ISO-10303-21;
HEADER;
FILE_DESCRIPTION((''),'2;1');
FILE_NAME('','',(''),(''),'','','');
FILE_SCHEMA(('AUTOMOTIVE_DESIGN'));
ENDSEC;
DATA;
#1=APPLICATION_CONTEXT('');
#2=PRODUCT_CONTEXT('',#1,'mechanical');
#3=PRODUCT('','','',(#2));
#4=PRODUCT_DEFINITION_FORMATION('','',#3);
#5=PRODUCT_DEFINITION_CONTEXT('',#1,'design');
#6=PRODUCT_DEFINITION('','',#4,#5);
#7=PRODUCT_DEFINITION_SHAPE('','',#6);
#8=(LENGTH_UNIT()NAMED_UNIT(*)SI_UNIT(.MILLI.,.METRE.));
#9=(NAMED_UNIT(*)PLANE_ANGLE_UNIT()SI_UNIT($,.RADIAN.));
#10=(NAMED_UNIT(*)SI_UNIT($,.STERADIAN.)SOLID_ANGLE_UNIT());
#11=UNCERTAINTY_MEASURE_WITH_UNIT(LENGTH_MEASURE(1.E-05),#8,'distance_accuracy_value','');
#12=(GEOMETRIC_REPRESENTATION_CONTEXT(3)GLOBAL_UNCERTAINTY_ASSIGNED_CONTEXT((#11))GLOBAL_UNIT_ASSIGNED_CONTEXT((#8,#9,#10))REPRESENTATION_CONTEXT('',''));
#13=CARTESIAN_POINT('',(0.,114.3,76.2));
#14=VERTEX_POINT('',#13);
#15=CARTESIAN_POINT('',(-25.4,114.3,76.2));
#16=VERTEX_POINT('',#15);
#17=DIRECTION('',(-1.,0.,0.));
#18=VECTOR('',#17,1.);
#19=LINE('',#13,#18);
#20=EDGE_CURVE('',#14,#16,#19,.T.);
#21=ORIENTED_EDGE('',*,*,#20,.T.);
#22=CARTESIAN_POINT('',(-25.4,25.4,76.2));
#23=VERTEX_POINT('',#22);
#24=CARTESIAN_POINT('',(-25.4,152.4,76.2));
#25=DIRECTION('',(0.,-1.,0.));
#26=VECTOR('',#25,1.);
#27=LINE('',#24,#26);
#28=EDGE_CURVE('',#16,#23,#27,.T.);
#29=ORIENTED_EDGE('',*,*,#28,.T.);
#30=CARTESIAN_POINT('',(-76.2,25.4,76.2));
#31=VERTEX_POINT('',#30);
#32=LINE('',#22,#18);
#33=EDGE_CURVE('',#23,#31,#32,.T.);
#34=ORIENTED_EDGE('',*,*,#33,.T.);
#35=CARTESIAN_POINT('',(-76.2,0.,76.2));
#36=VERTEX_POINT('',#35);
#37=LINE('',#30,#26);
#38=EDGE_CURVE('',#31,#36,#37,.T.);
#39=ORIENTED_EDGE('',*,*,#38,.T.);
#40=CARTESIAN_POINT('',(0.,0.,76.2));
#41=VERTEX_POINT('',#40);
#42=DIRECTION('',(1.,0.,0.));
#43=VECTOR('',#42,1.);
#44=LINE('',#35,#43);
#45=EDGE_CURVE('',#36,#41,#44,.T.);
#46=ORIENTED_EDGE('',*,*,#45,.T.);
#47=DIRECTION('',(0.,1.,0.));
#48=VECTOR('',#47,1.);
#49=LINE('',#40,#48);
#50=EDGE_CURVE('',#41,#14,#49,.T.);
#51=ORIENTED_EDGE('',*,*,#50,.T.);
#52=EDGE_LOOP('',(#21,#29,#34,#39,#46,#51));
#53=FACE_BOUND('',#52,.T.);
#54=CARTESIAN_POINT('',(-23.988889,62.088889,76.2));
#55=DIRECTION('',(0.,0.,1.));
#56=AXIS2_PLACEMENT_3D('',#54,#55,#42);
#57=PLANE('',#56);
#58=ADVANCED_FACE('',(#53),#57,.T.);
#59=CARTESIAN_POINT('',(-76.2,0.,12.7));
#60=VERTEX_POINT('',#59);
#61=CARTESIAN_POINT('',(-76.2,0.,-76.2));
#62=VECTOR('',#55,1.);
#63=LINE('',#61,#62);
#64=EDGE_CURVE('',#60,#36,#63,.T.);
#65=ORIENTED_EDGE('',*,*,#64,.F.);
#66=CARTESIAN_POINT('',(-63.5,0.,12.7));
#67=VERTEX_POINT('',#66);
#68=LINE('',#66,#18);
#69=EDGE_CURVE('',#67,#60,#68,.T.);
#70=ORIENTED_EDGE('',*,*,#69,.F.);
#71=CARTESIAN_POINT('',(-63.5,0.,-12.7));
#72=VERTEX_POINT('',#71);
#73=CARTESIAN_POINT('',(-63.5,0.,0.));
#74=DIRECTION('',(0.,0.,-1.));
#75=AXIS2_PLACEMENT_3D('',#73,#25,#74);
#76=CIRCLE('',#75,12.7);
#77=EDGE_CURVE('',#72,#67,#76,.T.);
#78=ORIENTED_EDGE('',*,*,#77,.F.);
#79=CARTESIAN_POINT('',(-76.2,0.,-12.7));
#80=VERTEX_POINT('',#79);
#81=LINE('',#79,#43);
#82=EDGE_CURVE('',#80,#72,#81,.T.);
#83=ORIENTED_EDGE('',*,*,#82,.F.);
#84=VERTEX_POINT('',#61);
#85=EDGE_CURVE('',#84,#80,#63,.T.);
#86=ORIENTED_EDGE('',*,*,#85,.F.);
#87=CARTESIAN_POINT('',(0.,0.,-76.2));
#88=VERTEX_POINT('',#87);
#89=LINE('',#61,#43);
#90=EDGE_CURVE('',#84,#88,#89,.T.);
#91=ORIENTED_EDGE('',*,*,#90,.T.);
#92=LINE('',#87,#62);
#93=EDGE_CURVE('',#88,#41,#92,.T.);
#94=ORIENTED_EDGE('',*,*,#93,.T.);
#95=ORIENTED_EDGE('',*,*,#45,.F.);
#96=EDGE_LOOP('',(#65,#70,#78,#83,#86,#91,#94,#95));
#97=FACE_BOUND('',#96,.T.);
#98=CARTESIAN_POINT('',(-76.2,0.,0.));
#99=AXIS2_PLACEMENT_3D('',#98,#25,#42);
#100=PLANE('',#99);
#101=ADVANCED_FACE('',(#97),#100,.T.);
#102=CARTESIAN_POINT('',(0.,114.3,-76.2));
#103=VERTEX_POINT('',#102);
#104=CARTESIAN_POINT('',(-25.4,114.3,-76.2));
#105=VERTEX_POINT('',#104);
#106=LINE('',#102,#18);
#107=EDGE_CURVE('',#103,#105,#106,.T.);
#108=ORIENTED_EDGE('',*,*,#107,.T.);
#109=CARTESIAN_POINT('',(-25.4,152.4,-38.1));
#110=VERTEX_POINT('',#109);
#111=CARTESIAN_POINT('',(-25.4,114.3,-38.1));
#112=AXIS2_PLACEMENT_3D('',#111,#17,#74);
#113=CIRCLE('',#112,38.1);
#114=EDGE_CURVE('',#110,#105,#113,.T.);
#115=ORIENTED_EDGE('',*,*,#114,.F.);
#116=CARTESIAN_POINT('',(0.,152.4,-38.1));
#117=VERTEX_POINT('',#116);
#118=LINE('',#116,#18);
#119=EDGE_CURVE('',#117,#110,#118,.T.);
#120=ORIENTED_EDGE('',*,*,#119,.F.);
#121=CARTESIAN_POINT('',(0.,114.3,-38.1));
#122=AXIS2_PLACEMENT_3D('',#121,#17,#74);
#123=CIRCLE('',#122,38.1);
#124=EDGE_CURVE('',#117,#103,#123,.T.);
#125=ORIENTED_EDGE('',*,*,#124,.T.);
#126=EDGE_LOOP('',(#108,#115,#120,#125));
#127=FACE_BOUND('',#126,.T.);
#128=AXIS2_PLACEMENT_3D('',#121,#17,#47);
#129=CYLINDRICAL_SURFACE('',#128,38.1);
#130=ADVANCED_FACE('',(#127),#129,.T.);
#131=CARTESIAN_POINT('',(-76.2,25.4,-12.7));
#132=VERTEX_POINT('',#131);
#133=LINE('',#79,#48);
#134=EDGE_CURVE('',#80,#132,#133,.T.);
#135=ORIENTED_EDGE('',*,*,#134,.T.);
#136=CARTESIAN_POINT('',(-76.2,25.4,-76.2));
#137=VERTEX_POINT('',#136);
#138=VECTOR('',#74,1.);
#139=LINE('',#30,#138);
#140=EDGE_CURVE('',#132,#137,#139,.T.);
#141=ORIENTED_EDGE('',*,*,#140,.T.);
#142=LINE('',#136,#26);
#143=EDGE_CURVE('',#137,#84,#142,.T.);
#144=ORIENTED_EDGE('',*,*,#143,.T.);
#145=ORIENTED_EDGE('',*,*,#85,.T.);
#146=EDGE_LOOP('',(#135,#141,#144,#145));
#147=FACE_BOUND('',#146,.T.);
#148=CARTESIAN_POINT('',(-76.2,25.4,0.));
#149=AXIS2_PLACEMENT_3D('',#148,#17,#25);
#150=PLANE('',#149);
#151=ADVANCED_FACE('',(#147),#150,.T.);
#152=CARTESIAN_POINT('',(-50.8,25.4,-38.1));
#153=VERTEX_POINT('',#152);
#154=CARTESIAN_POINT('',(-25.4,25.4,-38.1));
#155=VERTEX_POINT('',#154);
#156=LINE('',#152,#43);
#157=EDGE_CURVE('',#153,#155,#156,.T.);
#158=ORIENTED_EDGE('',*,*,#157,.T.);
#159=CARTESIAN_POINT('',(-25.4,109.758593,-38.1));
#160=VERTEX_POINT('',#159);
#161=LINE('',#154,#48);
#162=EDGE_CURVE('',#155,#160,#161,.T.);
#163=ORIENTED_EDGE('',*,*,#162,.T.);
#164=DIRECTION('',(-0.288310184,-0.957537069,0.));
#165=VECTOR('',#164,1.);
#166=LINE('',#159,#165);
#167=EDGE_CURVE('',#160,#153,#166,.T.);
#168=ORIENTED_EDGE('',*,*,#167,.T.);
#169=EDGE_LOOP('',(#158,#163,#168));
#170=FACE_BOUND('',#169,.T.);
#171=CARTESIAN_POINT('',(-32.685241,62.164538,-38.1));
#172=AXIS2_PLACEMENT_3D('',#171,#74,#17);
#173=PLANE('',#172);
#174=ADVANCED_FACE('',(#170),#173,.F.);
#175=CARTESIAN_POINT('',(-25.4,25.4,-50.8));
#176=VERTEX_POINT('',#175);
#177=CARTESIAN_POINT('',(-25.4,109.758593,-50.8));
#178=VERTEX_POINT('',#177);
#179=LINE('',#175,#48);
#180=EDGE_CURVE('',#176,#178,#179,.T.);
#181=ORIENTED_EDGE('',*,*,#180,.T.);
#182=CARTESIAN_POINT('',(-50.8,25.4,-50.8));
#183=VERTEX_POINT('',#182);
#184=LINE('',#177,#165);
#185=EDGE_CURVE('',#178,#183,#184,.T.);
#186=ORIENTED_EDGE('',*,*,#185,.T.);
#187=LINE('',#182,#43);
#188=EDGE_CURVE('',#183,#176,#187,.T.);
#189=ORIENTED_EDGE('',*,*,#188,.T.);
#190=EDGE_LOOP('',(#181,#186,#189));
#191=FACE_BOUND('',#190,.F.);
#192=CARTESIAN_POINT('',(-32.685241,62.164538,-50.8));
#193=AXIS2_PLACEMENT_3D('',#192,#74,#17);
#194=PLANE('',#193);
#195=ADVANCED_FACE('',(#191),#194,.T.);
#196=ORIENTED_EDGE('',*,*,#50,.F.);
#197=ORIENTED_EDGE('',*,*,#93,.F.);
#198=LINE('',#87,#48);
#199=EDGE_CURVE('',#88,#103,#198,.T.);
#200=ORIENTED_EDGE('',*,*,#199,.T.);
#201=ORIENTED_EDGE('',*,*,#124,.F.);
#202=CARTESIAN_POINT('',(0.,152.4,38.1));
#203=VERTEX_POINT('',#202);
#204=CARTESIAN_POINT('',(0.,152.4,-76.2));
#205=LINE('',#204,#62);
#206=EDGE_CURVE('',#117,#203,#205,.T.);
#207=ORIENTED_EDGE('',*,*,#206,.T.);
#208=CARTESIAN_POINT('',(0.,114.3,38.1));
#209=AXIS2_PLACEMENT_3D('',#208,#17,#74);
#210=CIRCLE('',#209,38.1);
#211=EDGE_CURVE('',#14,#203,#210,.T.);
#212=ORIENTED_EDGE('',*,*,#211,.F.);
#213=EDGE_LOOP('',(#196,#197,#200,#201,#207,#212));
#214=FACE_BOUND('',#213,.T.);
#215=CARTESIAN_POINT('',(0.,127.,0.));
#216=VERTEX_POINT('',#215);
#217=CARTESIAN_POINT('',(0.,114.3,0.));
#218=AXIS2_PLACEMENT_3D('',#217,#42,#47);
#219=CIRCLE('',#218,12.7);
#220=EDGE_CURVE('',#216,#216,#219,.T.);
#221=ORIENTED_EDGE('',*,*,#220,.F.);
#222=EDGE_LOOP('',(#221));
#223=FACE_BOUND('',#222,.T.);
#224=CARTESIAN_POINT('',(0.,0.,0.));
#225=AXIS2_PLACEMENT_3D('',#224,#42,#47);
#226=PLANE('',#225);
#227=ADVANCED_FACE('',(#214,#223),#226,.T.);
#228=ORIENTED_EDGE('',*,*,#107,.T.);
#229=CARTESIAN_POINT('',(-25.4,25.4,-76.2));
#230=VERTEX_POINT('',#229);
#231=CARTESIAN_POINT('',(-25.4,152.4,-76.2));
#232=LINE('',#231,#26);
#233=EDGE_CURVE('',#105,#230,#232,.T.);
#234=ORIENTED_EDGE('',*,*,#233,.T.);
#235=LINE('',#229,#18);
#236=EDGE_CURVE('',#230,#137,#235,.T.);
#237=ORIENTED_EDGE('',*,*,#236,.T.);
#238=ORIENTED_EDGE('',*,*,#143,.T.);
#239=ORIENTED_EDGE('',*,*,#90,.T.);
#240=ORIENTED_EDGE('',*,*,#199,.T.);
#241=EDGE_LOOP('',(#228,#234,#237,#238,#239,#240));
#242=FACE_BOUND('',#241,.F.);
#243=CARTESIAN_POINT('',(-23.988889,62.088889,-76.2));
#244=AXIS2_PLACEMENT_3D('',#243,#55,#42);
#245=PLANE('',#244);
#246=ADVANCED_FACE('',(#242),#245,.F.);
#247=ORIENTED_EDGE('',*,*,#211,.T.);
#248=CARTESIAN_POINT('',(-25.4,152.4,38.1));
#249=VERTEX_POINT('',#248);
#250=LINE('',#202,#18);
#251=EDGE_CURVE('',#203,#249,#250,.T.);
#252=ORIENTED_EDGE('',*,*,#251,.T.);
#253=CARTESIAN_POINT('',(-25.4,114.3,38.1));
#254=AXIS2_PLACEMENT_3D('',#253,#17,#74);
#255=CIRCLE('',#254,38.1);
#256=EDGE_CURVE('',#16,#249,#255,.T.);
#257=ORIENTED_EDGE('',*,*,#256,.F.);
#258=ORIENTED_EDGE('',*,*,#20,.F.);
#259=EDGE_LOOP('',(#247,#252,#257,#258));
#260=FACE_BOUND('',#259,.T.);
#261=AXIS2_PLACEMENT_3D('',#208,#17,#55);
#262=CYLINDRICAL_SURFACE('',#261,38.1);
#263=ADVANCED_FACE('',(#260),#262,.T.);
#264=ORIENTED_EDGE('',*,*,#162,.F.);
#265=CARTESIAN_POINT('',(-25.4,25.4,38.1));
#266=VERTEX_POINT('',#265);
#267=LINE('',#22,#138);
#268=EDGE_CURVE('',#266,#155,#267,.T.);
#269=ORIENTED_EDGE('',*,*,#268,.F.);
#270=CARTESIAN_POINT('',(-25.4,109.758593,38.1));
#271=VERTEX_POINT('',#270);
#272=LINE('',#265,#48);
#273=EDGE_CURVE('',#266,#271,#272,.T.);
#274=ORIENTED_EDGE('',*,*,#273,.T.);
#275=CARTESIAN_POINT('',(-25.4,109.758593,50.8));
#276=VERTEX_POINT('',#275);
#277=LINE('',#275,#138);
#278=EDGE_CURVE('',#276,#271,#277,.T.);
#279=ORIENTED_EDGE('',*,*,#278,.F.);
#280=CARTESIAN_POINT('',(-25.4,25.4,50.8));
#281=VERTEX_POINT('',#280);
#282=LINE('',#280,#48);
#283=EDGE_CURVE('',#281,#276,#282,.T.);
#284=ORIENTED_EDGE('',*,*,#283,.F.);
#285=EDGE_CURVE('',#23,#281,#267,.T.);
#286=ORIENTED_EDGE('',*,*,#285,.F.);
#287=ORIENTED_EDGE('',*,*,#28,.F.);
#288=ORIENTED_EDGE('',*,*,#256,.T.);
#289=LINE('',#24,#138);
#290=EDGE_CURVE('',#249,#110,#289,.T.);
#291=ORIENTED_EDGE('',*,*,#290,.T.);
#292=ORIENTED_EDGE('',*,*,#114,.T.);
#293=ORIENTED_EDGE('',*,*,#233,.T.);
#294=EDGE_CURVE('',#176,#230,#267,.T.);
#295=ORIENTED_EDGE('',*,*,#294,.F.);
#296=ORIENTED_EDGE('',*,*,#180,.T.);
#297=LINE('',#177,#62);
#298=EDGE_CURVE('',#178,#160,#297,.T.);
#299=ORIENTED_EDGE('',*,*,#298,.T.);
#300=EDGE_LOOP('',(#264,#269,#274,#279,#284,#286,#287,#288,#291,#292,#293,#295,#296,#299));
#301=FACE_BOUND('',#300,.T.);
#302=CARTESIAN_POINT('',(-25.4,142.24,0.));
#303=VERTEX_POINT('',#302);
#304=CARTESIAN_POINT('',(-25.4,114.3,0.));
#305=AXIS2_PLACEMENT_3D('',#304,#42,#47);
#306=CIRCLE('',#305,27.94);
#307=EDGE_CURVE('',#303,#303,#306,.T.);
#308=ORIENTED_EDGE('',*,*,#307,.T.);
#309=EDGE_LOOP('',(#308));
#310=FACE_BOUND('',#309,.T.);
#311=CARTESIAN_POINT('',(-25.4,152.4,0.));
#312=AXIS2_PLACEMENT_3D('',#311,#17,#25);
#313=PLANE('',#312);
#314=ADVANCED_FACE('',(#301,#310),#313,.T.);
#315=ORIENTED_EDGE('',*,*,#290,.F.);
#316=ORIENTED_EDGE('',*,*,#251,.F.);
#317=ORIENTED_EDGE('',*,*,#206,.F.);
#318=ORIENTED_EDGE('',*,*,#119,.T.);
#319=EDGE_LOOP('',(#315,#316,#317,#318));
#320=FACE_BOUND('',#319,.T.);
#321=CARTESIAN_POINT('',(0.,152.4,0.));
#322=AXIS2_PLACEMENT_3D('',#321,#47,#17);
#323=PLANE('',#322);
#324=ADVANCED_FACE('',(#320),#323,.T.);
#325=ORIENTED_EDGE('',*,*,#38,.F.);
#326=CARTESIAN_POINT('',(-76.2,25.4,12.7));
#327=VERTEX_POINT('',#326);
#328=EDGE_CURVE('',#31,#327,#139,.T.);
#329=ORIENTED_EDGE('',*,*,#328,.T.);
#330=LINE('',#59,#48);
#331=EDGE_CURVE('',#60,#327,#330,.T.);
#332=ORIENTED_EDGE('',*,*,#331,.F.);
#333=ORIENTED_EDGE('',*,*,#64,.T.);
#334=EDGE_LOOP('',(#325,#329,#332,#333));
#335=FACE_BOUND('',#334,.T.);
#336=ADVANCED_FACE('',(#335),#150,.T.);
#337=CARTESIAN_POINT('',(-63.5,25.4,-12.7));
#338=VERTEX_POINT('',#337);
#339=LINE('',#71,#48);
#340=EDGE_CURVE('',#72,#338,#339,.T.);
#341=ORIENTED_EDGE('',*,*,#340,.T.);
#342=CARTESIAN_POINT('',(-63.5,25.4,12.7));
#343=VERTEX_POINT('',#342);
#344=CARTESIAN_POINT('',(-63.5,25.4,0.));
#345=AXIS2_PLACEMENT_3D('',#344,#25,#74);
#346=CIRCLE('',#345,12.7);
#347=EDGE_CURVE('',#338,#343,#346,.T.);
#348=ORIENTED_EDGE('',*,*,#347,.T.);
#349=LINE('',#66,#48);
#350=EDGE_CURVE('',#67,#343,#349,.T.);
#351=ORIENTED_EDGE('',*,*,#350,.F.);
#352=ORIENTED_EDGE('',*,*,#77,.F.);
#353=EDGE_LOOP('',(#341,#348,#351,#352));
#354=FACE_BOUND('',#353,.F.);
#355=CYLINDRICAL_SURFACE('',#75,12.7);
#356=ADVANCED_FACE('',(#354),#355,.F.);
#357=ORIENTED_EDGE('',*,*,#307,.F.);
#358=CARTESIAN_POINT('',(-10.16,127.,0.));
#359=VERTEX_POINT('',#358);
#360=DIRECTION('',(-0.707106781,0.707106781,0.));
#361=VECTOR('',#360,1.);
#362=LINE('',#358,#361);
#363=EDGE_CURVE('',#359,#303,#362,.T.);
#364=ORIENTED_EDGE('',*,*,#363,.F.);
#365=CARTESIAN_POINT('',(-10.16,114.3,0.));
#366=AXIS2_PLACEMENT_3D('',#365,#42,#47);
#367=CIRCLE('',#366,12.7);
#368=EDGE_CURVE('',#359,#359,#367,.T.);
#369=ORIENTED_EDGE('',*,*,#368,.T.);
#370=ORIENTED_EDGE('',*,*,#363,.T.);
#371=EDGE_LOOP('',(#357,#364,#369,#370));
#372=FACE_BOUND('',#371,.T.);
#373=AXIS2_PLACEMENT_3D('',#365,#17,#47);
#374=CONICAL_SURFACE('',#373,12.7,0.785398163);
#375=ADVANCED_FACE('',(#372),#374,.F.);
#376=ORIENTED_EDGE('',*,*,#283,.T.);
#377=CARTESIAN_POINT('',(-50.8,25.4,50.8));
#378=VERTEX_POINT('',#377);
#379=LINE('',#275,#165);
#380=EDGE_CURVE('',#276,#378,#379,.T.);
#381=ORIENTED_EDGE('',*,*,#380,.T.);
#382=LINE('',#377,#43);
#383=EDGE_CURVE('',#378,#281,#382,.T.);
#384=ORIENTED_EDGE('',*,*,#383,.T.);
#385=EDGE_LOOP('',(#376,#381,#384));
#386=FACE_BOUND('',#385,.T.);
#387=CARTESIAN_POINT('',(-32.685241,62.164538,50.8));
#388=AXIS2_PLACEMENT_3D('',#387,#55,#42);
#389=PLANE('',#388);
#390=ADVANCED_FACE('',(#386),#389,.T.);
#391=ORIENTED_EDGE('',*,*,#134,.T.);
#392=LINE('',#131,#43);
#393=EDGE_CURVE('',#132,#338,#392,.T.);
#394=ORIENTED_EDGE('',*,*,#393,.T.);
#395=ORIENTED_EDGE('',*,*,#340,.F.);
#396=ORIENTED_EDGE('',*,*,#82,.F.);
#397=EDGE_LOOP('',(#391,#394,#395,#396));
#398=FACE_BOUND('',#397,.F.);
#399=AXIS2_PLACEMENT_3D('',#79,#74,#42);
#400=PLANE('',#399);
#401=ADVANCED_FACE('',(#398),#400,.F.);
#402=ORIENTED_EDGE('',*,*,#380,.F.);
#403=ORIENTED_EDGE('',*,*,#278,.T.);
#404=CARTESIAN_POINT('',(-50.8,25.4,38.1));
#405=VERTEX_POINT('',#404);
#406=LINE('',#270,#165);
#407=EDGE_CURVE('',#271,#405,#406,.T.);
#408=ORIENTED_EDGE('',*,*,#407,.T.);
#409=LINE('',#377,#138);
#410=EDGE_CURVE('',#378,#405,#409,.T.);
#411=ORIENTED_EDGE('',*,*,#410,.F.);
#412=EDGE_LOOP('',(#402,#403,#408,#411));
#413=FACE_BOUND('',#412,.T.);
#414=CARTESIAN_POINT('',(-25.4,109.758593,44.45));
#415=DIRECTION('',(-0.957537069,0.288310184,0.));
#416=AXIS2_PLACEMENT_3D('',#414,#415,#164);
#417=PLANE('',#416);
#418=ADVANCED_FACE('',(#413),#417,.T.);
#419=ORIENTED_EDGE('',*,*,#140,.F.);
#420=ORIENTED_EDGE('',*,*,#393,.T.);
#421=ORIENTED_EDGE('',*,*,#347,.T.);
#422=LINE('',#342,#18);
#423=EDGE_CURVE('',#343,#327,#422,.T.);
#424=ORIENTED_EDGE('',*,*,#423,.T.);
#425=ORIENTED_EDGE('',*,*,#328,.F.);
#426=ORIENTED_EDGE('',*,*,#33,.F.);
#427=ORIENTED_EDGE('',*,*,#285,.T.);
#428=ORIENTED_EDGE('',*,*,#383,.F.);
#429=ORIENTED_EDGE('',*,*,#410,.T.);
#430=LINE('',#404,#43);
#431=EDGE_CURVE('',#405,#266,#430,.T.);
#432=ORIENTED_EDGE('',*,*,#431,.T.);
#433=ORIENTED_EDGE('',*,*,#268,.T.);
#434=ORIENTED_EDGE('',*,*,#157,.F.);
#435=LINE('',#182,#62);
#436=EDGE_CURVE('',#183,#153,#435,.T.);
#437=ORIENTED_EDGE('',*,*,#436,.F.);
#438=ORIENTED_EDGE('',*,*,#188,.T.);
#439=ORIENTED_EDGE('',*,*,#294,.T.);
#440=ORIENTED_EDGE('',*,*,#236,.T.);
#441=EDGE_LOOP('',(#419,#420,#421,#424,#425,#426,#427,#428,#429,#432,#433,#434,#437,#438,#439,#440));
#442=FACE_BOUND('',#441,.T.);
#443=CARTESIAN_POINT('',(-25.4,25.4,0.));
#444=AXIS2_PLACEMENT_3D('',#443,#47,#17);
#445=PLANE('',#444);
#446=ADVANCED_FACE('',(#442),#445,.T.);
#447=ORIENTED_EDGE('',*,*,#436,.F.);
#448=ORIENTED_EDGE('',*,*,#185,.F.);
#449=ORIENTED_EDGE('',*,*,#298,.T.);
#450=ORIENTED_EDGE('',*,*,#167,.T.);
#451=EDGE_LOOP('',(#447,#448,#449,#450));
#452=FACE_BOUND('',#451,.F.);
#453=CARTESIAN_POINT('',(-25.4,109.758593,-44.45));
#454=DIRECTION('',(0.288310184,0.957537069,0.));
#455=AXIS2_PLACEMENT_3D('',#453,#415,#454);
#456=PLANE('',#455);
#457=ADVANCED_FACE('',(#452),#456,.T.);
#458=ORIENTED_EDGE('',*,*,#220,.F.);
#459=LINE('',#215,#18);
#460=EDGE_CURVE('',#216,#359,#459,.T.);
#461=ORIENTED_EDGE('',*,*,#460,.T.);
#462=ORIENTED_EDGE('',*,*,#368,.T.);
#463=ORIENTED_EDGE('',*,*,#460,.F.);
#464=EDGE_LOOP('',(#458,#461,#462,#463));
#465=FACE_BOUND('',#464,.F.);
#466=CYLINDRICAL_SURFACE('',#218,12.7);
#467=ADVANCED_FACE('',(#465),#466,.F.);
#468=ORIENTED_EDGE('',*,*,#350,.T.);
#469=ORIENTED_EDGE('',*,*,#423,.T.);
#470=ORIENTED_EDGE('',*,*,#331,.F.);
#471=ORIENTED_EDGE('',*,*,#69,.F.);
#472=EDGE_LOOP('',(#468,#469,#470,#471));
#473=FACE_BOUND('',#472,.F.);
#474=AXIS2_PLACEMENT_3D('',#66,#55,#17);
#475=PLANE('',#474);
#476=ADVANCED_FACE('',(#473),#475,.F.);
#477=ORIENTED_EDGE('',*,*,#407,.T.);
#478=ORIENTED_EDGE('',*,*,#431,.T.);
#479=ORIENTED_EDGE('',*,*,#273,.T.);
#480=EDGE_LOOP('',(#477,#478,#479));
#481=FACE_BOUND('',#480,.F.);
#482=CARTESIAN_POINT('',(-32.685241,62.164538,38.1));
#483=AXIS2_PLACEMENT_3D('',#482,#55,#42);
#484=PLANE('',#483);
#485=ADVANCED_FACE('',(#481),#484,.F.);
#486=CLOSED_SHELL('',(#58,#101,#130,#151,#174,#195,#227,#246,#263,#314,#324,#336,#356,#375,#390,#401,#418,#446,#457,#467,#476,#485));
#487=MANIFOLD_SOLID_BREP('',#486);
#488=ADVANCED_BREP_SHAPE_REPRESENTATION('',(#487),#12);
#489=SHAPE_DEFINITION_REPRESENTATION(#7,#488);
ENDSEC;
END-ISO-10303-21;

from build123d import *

# Parameters (mm, degrees)
F1_DEPTH = 76.2
F2_R     = 12.7
F3_DEPTH = 76.201
F5_DEPTH = 25.4
F8_DEPTH = 6.35
F9_R     = 38.1
F10_R    = 38.1
F11_SIZE = 15.24


# Not quite as in the source:
# - a pattern or mirror of a feature is missing from the dataset's text; its kind, count and spacing are read off the source's solid


with BuildPart() as f1:
    # F0 (on Top) → F1 (new body, symmetric)
    with BuildSketch(Plane.XY):
        Polygon((-76.2, 25.4), (-76.2, 0), (0, 0), (0, 152.4), (-25.4, 152.4), (-25.4, 25.4), align=None)
    extrude(amount=F1_DEPTH, both=True)

    # F2 (on face) → F3 (cut, through all)
    with BuildSketch(Plane.YZ):
        with Locations((114.3, 0)):
            Circle(F2_R)
    extrude(amount=-F3_DEPTH, mode=Mode.SUBTRACT)

    # F4 (on face) → F5 (cut)
    with BuildSketch(Plane.XZ):
        with BuildLine():
            ThreePointArc((-63.5, -12.7), (-50.8, 0), (-63.5, 12.7))
            Line((-63.5, 12.7), (-76.2, 12.7))
            Line((-76.2, 12.7), (-76.2, -12.7))
            Line((-76.2, -12.7), (-63.5, -12.7))
        make_face()
    extrude(amount=-F5_DEPTH, mode=Mode.SUBTRACT)

    # F7 (on offset) → F8 (join, symmetric)
    with BuildSketch(Plane.XY.offset(44.45)):
        Polygon((-50.8, 25.4), (-25.4, 25.4), (-25.4, 109.758593142), align=None)
    f8 = extrude(amount=F8_DEPTH, both=True)

    # F8_copies: F8 across plane
    add(f8.mirror(Plane(origin=(0, 0, 0), x_dir=(-1, 0, 0), z_dir=(0, 0, -1))))

    # F9
    f9_edges = [f1.edges().sort_by_distance(p)[0] for p in [
        (-12.7, 152.4, 76.2),
    ]]
    fillet(f9_edges, radius=F9_R)

    # F10
    f10_edges = [f1.edges().sort_by_distance(p)[0] for p in [
        (-12.7, 152.4, -76.2),
    ]]
    fillet(f10_edges, radius=F10_R)

    # F11
    f11_edges = [f1.edges().sort_by_distance(p)[0] for p in [
        (-25.4, 101.6, 0),
    ]]
    chamfer(f11_edges, length=F11_SIZE)


solid = f1.part
